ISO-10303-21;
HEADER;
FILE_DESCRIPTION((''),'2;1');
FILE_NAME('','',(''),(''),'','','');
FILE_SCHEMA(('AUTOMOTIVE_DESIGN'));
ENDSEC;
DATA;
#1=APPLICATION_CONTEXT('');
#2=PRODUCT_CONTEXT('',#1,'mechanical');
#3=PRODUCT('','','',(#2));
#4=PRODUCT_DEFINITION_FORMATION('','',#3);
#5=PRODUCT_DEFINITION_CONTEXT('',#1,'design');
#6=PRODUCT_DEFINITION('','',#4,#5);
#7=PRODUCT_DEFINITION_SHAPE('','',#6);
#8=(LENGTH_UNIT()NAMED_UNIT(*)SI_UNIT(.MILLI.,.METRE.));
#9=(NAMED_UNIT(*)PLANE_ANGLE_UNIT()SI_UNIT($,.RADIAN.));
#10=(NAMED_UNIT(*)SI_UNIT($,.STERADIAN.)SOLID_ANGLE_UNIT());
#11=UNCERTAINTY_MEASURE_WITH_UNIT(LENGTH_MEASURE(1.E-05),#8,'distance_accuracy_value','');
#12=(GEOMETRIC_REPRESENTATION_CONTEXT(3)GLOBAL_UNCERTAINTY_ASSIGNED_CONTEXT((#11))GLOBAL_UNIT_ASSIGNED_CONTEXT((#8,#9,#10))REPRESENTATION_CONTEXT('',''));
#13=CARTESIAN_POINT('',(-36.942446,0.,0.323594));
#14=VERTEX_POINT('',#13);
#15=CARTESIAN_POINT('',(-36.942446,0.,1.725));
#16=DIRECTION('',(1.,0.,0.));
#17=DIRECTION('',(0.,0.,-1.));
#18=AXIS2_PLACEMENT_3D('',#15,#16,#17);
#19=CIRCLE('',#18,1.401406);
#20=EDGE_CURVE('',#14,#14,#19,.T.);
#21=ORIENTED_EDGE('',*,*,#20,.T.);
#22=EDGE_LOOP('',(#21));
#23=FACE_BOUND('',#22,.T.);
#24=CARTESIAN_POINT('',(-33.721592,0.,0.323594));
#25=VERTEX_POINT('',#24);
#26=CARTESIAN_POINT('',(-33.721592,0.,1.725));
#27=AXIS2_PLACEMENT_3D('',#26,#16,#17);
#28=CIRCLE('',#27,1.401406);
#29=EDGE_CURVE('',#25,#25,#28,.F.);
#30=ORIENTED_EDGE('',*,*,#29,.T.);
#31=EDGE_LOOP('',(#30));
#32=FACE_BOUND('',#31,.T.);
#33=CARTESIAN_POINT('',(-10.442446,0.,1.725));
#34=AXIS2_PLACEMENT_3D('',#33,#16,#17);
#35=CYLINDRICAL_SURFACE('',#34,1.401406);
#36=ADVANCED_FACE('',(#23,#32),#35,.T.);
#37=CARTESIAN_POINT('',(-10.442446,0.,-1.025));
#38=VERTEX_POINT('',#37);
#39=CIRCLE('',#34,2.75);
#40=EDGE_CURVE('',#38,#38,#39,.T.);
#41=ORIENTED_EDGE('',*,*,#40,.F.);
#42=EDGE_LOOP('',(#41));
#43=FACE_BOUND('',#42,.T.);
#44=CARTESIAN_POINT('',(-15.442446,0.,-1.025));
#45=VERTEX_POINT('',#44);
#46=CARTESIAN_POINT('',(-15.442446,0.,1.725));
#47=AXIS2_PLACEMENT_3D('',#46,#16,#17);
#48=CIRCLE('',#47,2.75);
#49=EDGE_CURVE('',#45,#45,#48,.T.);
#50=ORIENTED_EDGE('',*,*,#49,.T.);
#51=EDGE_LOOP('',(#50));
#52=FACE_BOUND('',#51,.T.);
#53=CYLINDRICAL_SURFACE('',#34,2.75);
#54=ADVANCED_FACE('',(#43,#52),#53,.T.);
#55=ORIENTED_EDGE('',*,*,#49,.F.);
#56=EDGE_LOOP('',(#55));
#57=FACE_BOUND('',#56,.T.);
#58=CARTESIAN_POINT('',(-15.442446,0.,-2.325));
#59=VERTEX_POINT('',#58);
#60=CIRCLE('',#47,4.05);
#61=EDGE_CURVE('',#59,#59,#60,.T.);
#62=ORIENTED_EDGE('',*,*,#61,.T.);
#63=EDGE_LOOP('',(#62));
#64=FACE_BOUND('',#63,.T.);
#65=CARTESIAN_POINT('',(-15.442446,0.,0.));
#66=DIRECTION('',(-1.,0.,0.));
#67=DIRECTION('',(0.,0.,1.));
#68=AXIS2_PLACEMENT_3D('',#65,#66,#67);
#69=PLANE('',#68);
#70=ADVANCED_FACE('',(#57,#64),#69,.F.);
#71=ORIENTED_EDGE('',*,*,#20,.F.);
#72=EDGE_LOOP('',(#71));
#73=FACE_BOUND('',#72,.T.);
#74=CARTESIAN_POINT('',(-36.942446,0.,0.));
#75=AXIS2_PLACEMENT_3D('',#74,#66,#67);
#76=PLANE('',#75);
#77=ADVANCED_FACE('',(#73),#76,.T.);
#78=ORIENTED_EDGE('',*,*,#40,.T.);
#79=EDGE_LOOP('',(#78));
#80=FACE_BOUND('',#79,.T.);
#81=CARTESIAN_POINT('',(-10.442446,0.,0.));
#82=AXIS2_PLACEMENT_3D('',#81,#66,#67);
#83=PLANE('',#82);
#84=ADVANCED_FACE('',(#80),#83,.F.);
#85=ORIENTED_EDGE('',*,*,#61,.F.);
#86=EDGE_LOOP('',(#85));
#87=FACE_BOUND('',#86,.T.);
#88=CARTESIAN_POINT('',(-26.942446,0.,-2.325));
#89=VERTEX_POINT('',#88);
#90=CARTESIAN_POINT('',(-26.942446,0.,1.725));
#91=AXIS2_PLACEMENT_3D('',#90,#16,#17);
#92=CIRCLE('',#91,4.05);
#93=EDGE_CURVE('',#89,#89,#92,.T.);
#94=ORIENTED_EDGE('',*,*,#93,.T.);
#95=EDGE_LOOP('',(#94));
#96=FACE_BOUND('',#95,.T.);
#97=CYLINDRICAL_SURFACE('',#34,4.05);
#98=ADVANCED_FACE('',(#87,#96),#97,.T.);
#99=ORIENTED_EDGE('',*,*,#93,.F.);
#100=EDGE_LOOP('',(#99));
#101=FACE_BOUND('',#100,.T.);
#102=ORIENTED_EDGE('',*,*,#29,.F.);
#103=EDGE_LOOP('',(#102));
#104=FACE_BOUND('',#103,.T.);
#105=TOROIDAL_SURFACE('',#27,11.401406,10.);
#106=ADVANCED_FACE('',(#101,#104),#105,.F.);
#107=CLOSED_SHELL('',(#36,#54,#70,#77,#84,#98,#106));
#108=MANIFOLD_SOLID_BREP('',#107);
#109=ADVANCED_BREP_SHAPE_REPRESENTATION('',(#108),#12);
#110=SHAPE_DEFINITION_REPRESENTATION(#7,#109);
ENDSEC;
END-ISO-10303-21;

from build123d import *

# Parameters (mm, degrees)
SKETCH_1_W   = 5
SKETCH_1_H   = 2.75
SKETCH_1_3_W = 10
SKETCH_1_3_H = 1.401405784
FILLET_1_R   = 10


with BuildPart() as part:
    # 草图1 → 旋转1 (revolve)
    with BuildSketch(Plane(origin=(0, 0, 0), x_dir=(1, 0, 0), z_dir=(0, 1, 0))):
        Polygon((-26.94244556, -1.725), (-15.44244556, -1.725), (-15.44244556, 1.025), (-15.44244556, 2.325), (-26.94244556, 2.325), (-26.94244556, -0.323594216), align=None)
        with Locations((-12.94244556, -0.35)):
            Rectangle(SKETCH_1_W, SKETCH_1_H)
    revolve(axis=Axis((-10.44244556, 0, 1.725), (-1, 0, 0)))

    # 草图1<3> → 旋转2 (revolve)
    with BuildSketch(Plane(origin=(0, 0, 0), x_dir=(1, 0, 0), z_dir=(0, 1, 0))):
        with Locations((-31.94244556, -1.024297108)):
            Rectangle(SKETCH_1_3_W, SKETCH_1_3_H)
    revolve(axis=Axis((-10.44244556, 0, 1.725), (-1, 0, 0)))

    # 圆角1
    # the kernel refuses this fillet: 10 mm, written as the material it adds along each edge
    with BuildSketch(Plane(origin=(-26.94244556, 0, 1.725), x_dir=(0, 0, -1), z_dir=(0, 1, 0))) as fillet_1_piece_1:
        with BuildLine():
            CenterArc((11.401405784, 6.779146923), FILLET_1_R, 180, 42.680903871)
            Line((1.401405784, 6.779146923), (1.201405784, 6.779146923))
            Line((1.201405784, 6.779146923), (1.201405784, 0))
            Line((1.201405784, 0), (1.401405784, -0.2))
            ThreePointArc((1.401405784, -0.2), (2.725702892, -0.2), (3.902971884, -0.135582938))
            Line((3.902971884, -0.135582938), (4.05, 0))
        make_face()
    revolve(axis=Axis((-26.94244556, 0, 1.725), (-1, 0, 0)))


solid = part.part
